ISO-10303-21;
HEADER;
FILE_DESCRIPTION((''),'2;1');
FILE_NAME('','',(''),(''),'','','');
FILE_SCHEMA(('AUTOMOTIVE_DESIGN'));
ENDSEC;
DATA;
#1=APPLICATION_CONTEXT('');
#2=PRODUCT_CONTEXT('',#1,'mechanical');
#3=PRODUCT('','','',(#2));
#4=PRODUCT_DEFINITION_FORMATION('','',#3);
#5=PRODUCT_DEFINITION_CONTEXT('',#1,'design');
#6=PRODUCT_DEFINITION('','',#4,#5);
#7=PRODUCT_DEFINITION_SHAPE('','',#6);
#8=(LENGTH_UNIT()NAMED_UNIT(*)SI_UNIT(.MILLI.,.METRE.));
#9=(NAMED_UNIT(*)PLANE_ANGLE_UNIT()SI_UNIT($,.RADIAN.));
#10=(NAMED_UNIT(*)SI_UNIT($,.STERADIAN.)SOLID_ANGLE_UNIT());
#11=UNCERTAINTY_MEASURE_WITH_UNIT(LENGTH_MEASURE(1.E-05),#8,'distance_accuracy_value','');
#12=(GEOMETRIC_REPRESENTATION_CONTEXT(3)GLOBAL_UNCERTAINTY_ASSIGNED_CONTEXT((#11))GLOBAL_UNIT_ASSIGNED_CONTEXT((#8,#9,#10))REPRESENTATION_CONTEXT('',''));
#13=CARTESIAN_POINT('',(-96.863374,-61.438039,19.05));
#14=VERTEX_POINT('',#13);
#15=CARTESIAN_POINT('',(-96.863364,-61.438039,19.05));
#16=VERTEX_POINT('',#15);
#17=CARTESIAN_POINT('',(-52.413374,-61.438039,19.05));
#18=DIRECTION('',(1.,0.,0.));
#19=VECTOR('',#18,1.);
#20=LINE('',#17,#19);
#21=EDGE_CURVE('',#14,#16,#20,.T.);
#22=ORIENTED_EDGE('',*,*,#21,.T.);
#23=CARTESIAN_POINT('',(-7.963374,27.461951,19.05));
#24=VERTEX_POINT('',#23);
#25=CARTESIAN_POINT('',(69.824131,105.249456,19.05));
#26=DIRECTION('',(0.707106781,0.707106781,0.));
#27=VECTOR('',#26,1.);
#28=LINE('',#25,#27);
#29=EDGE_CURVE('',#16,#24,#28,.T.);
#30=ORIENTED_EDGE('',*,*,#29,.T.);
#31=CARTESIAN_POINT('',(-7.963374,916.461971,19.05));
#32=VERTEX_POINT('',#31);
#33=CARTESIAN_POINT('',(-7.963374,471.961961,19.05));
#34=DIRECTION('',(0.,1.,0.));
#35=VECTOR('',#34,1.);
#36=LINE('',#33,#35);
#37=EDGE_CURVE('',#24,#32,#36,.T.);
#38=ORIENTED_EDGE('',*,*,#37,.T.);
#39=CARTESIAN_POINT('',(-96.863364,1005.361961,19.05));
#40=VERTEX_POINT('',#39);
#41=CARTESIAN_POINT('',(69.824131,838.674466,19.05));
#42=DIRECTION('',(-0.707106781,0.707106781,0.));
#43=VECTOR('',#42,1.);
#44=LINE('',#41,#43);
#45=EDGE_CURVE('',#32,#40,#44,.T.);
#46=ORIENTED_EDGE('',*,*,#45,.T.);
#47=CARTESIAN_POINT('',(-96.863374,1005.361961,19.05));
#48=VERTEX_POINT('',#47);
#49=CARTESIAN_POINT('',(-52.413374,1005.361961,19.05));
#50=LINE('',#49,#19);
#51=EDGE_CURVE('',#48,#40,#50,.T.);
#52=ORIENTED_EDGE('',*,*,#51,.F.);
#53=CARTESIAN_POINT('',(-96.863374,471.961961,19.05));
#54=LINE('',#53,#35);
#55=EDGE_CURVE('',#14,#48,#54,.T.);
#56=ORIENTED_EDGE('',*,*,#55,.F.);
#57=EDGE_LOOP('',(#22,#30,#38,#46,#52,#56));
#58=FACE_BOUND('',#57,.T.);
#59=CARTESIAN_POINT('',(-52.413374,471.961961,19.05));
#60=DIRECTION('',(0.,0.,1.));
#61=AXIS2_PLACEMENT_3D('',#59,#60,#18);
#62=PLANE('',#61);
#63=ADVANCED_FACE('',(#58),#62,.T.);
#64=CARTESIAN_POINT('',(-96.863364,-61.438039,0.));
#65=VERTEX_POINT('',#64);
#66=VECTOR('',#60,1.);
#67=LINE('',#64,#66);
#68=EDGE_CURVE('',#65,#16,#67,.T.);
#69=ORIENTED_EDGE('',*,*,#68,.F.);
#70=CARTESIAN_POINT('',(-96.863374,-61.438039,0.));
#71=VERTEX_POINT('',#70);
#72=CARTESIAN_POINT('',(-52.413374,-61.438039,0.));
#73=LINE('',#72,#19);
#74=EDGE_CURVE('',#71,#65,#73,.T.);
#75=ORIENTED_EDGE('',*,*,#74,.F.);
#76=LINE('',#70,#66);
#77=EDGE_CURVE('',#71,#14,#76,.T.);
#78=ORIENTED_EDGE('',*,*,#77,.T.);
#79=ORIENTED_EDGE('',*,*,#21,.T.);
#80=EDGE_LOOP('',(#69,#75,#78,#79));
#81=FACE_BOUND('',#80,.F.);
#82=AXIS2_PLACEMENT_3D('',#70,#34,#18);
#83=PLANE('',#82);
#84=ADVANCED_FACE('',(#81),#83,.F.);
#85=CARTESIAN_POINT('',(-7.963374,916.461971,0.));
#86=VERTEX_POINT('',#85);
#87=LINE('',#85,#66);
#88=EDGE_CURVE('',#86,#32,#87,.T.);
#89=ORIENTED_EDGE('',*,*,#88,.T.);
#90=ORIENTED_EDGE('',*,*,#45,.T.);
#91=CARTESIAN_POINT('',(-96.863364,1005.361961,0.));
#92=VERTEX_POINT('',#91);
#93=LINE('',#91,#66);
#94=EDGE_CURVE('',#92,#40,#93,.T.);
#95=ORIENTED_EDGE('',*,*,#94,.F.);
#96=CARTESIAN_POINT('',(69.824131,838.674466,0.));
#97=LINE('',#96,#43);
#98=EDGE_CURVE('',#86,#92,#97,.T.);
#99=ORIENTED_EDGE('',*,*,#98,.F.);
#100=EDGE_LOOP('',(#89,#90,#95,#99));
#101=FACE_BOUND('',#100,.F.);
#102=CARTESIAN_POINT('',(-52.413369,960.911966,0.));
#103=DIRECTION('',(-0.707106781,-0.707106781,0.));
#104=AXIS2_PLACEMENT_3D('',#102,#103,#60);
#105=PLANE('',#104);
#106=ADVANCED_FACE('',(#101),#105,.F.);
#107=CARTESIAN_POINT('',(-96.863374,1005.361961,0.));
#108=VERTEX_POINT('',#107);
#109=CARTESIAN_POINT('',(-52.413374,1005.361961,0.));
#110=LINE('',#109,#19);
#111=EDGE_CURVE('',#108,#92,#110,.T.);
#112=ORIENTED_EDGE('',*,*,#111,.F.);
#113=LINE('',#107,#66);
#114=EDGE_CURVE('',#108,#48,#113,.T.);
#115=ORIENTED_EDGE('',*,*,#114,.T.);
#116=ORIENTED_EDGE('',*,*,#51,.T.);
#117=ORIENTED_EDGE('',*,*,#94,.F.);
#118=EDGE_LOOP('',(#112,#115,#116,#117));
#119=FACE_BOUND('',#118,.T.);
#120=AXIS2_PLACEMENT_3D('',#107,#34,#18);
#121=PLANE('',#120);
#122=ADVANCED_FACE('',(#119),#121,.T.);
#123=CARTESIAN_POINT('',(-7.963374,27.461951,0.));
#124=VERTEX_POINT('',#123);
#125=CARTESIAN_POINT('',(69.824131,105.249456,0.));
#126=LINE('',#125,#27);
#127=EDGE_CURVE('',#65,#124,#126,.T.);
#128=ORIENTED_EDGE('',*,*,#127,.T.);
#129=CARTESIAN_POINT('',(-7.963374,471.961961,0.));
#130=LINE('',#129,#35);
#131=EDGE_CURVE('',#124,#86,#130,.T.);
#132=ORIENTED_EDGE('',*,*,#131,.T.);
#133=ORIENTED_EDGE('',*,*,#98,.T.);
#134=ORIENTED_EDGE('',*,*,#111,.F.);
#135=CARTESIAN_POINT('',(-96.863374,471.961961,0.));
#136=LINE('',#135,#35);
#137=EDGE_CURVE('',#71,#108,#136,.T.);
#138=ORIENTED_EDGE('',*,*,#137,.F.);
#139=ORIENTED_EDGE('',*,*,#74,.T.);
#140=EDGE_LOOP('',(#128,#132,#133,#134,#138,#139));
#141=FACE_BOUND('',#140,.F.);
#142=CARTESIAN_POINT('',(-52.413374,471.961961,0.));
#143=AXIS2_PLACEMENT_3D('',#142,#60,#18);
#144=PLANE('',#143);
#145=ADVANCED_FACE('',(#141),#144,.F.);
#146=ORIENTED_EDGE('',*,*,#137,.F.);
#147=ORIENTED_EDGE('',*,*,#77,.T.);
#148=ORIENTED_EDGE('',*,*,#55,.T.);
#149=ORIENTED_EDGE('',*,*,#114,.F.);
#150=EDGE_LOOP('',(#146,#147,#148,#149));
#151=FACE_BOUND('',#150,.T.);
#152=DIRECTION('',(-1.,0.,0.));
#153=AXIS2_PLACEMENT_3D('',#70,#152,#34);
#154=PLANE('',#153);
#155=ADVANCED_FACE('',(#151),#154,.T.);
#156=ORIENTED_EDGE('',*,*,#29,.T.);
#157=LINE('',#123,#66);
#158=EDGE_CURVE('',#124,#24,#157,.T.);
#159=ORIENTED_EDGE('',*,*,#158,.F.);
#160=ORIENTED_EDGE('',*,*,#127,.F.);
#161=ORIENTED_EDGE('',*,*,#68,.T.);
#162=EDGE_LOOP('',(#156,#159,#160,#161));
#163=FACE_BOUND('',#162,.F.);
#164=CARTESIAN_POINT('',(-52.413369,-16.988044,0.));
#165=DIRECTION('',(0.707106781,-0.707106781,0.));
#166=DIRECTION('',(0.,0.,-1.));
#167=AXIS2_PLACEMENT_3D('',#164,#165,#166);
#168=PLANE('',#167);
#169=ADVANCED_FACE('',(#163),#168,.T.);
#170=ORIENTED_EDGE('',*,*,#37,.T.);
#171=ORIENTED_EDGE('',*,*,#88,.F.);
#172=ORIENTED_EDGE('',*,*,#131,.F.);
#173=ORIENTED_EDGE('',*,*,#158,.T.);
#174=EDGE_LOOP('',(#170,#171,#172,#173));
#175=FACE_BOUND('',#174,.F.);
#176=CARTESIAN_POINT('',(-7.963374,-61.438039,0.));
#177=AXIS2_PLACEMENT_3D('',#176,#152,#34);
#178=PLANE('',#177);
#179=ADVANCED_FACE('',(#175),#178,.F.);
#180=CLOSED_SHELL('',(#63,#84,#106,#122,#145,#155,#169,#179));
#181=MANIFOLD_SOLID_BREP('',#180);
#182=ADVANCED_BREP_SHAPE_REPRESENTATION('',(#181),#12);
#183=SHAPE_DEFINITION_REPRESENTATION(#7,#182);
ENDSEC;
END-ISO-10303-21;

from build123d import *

# Parameters (mm, degrees)
F0_W     = 88.9
F0_H     = 1066.8
F1_DEPTH = 19.05
F2_SIZE  = 88.89999
F3_SIZE  = 88.89999


# Not quite as in the source:
# - a fillet or chamfer is up to 0.001 mm smaller than in the source, because OpenCascade refuses the exact size


with BuildPart() as f1:
    # F0 (on Top) → F1 (new body)
    with BuildSketch(Plane.XY):
        with Locations((-52.413374114, 471.9619610548)):
            Rectangle(F0_W, F0_H)
    extrude(amount=F1_DEPTH)

    # F2 (size 88.9 in the source; OpenCascade refuses exactly that, so slightly less here)
    f2_edges = [f1.edges().sort_by_distance(p)[0] for p in [
        (-7.963374, -61.438039, 9.525),
    ]]
    chamfer(f2_edges, length=F2_SIZE)

    # F3 (size 88.9 in the source; OpenCascade refuses exactly that, so slightly less here)
    f3_edges = [f1.edges().sort_by_distance(p)[0] for p in [
        (-7.963374, 1005.361961, 9.525),
    ]]
    chamfer(f3_edges, length=F3_SIZE)


solid = f1.part
